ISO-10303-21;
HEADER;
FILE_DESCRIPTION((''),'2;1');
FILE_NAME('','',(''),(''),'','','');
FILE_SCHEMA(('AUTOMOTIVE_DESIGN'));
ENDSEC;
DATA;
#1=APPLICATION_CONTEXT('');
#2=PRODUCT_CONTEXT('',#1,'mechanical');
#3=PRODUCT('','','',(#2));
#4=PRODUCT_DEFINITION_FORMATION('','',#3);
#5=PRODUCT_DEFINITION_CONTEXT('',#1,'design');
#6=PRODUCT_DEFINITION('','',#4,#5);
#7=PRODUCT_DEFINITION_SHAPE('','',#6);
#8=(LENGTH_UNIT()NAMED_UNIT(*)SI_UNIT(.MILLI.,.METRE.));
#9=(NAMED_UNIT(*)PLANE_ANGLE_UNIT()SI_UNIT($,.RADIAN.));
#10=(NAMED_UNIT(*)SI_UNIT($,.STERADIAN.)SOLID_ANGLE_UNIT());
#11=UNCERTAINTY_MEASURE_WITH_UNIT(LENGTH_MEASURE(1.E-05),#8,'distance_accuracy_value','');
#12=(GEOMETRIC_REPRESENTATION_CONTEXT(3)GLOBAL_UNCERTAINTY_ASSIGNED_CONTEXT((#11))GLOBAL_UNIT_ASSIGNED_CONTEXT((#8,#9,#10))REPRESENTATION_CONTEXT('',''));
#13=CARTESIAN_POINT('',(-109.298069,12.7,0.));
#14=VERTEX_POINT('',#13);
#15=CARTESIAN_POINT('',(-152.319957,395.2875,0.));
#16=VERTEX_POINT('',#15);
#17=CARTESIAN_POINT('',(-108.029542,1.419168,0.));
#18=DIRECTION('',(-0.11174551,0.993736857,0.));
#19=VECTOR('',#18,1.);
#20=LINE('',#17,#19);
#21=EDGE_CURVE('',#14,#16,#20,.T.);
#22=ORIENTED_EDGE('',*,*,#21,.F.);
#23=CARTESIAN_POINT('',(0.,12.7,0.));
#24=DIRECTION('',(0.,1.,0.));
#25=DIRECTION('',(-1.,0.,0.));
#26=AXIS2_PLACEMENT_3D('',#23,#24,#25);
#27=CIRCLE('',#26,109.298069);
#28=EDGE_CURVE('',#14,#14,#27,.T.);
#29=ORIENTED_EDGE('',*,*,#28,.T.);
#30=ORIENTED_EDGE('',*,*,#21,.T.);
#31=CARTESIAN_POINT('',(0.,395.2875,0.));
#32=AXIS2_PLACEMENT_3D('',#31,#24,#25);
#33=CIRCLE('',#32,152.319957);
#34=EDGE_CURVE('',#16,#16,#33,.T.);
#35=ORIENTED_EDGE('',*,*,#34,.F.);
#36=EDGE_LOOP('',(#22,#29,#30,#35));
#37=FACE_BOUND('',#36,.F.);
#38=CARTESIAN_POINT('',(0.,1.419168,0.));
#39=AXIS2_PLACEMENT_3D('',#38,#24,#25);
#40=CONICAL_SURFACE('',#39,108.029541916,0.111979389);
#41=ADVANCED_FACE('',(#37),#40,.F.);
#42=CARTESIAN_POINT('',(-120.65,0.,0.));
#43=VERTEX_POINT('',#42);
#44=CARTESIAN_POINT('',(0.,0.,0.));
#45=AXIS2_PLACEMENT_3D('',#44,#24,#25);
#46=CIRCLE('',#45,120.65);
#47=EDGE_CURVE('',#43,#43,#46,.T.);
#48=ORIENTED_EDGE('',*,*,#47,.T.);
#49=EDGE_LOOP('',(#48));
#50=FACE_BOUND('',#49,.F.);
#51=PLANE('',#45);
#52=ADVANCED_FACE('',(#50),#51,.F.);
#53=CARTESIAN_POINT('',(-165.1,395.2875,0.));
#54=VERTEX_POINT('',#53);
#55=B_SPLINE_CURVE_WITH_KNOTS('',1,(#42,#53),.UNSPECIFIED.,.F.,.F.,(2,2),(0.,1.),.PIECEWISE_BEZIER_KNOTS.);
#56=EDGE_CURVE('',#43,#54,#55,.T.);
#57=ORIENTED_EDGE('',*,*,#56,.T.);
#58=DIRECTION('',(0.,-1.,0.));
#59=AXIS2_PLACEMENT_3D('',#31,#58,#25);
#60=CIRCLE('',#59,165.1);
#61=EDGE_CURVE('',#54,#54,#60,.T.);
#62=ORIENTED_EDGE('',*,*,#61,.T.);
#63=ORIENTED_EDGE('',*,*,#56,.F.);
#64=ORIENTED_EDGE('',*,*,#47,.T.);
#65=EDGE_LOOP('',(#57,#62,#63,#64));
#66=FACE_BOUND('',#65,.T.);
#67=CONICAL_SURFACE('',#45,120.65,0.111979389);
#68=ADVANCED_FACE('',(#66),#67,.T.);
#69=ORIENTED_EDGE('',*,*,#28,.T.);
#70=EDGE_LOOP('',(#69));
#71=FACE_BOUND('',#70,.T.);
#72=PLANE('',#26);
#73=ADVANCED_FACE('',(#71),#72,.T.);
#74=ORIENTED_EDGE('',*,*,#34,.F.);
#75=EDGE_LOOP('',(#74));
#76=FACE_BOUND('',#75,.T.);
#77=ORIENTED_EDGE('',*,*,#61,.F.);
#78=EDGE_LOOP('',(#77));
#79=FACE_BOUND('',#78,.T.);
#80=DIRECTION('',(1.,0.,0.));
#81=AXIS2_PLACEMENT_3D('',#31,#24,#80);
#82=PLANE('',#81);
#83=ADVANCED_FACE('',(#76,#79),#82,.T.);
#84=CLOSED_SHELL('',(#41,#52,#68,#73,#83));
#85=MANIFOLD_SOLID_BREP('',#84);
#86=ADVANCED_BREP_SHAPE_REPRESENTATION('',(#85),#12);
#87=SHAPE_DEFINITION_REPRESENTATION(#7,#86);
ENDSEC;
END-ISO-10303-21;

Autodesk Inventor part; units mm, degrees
ref_plane "YZ Plane" through (0, 0, 0) normal (1, 0, 0) x (0, 1, 0)
ref_plane "XZ Plane" through (0, 0, 0) normal (0, 1, 0) x (-1, 0, 0)
ref_plane "XY Plane" through (0, 0, 0) normal (0, 0, 1) x (1, 0, 0)
sketch "Sketch1" plane through (0, 0, 0) normal (0, 1, 0) x (-1, 0, 0)
  circle A0 centre (0, 0) radius 120.65
  dimension "d0" = 241.3
sketch "Sketch2" plane through (0, 0, 0) normal (0, 1, 0) x (-1, 0, 0)
  circle A0 centre (0, 0) radius 5.5202
extrude "Extrusion1" add sketch "Sketch2" along normal blind 395.2875
sketch "Sketch3" plane through (0, 395.2875, 0) normal (0, 1, 0) x (1, 0, 0)
  circle A0 centre (0, 0) radius 5.5202 projected
  circle A1 centre (0, 0) radius 165.1
  dimension "d3" = 330.2
loft "Loft1" add profiles "Sketch1", "Sketch3" contours all / A0 | A1
shell "Shell1" thickness 12.7 removed faces 1 at (-20.3699, 395.2875, -51.1247)
properties part number "Trash Can Bottom" material "Polypropylene"
